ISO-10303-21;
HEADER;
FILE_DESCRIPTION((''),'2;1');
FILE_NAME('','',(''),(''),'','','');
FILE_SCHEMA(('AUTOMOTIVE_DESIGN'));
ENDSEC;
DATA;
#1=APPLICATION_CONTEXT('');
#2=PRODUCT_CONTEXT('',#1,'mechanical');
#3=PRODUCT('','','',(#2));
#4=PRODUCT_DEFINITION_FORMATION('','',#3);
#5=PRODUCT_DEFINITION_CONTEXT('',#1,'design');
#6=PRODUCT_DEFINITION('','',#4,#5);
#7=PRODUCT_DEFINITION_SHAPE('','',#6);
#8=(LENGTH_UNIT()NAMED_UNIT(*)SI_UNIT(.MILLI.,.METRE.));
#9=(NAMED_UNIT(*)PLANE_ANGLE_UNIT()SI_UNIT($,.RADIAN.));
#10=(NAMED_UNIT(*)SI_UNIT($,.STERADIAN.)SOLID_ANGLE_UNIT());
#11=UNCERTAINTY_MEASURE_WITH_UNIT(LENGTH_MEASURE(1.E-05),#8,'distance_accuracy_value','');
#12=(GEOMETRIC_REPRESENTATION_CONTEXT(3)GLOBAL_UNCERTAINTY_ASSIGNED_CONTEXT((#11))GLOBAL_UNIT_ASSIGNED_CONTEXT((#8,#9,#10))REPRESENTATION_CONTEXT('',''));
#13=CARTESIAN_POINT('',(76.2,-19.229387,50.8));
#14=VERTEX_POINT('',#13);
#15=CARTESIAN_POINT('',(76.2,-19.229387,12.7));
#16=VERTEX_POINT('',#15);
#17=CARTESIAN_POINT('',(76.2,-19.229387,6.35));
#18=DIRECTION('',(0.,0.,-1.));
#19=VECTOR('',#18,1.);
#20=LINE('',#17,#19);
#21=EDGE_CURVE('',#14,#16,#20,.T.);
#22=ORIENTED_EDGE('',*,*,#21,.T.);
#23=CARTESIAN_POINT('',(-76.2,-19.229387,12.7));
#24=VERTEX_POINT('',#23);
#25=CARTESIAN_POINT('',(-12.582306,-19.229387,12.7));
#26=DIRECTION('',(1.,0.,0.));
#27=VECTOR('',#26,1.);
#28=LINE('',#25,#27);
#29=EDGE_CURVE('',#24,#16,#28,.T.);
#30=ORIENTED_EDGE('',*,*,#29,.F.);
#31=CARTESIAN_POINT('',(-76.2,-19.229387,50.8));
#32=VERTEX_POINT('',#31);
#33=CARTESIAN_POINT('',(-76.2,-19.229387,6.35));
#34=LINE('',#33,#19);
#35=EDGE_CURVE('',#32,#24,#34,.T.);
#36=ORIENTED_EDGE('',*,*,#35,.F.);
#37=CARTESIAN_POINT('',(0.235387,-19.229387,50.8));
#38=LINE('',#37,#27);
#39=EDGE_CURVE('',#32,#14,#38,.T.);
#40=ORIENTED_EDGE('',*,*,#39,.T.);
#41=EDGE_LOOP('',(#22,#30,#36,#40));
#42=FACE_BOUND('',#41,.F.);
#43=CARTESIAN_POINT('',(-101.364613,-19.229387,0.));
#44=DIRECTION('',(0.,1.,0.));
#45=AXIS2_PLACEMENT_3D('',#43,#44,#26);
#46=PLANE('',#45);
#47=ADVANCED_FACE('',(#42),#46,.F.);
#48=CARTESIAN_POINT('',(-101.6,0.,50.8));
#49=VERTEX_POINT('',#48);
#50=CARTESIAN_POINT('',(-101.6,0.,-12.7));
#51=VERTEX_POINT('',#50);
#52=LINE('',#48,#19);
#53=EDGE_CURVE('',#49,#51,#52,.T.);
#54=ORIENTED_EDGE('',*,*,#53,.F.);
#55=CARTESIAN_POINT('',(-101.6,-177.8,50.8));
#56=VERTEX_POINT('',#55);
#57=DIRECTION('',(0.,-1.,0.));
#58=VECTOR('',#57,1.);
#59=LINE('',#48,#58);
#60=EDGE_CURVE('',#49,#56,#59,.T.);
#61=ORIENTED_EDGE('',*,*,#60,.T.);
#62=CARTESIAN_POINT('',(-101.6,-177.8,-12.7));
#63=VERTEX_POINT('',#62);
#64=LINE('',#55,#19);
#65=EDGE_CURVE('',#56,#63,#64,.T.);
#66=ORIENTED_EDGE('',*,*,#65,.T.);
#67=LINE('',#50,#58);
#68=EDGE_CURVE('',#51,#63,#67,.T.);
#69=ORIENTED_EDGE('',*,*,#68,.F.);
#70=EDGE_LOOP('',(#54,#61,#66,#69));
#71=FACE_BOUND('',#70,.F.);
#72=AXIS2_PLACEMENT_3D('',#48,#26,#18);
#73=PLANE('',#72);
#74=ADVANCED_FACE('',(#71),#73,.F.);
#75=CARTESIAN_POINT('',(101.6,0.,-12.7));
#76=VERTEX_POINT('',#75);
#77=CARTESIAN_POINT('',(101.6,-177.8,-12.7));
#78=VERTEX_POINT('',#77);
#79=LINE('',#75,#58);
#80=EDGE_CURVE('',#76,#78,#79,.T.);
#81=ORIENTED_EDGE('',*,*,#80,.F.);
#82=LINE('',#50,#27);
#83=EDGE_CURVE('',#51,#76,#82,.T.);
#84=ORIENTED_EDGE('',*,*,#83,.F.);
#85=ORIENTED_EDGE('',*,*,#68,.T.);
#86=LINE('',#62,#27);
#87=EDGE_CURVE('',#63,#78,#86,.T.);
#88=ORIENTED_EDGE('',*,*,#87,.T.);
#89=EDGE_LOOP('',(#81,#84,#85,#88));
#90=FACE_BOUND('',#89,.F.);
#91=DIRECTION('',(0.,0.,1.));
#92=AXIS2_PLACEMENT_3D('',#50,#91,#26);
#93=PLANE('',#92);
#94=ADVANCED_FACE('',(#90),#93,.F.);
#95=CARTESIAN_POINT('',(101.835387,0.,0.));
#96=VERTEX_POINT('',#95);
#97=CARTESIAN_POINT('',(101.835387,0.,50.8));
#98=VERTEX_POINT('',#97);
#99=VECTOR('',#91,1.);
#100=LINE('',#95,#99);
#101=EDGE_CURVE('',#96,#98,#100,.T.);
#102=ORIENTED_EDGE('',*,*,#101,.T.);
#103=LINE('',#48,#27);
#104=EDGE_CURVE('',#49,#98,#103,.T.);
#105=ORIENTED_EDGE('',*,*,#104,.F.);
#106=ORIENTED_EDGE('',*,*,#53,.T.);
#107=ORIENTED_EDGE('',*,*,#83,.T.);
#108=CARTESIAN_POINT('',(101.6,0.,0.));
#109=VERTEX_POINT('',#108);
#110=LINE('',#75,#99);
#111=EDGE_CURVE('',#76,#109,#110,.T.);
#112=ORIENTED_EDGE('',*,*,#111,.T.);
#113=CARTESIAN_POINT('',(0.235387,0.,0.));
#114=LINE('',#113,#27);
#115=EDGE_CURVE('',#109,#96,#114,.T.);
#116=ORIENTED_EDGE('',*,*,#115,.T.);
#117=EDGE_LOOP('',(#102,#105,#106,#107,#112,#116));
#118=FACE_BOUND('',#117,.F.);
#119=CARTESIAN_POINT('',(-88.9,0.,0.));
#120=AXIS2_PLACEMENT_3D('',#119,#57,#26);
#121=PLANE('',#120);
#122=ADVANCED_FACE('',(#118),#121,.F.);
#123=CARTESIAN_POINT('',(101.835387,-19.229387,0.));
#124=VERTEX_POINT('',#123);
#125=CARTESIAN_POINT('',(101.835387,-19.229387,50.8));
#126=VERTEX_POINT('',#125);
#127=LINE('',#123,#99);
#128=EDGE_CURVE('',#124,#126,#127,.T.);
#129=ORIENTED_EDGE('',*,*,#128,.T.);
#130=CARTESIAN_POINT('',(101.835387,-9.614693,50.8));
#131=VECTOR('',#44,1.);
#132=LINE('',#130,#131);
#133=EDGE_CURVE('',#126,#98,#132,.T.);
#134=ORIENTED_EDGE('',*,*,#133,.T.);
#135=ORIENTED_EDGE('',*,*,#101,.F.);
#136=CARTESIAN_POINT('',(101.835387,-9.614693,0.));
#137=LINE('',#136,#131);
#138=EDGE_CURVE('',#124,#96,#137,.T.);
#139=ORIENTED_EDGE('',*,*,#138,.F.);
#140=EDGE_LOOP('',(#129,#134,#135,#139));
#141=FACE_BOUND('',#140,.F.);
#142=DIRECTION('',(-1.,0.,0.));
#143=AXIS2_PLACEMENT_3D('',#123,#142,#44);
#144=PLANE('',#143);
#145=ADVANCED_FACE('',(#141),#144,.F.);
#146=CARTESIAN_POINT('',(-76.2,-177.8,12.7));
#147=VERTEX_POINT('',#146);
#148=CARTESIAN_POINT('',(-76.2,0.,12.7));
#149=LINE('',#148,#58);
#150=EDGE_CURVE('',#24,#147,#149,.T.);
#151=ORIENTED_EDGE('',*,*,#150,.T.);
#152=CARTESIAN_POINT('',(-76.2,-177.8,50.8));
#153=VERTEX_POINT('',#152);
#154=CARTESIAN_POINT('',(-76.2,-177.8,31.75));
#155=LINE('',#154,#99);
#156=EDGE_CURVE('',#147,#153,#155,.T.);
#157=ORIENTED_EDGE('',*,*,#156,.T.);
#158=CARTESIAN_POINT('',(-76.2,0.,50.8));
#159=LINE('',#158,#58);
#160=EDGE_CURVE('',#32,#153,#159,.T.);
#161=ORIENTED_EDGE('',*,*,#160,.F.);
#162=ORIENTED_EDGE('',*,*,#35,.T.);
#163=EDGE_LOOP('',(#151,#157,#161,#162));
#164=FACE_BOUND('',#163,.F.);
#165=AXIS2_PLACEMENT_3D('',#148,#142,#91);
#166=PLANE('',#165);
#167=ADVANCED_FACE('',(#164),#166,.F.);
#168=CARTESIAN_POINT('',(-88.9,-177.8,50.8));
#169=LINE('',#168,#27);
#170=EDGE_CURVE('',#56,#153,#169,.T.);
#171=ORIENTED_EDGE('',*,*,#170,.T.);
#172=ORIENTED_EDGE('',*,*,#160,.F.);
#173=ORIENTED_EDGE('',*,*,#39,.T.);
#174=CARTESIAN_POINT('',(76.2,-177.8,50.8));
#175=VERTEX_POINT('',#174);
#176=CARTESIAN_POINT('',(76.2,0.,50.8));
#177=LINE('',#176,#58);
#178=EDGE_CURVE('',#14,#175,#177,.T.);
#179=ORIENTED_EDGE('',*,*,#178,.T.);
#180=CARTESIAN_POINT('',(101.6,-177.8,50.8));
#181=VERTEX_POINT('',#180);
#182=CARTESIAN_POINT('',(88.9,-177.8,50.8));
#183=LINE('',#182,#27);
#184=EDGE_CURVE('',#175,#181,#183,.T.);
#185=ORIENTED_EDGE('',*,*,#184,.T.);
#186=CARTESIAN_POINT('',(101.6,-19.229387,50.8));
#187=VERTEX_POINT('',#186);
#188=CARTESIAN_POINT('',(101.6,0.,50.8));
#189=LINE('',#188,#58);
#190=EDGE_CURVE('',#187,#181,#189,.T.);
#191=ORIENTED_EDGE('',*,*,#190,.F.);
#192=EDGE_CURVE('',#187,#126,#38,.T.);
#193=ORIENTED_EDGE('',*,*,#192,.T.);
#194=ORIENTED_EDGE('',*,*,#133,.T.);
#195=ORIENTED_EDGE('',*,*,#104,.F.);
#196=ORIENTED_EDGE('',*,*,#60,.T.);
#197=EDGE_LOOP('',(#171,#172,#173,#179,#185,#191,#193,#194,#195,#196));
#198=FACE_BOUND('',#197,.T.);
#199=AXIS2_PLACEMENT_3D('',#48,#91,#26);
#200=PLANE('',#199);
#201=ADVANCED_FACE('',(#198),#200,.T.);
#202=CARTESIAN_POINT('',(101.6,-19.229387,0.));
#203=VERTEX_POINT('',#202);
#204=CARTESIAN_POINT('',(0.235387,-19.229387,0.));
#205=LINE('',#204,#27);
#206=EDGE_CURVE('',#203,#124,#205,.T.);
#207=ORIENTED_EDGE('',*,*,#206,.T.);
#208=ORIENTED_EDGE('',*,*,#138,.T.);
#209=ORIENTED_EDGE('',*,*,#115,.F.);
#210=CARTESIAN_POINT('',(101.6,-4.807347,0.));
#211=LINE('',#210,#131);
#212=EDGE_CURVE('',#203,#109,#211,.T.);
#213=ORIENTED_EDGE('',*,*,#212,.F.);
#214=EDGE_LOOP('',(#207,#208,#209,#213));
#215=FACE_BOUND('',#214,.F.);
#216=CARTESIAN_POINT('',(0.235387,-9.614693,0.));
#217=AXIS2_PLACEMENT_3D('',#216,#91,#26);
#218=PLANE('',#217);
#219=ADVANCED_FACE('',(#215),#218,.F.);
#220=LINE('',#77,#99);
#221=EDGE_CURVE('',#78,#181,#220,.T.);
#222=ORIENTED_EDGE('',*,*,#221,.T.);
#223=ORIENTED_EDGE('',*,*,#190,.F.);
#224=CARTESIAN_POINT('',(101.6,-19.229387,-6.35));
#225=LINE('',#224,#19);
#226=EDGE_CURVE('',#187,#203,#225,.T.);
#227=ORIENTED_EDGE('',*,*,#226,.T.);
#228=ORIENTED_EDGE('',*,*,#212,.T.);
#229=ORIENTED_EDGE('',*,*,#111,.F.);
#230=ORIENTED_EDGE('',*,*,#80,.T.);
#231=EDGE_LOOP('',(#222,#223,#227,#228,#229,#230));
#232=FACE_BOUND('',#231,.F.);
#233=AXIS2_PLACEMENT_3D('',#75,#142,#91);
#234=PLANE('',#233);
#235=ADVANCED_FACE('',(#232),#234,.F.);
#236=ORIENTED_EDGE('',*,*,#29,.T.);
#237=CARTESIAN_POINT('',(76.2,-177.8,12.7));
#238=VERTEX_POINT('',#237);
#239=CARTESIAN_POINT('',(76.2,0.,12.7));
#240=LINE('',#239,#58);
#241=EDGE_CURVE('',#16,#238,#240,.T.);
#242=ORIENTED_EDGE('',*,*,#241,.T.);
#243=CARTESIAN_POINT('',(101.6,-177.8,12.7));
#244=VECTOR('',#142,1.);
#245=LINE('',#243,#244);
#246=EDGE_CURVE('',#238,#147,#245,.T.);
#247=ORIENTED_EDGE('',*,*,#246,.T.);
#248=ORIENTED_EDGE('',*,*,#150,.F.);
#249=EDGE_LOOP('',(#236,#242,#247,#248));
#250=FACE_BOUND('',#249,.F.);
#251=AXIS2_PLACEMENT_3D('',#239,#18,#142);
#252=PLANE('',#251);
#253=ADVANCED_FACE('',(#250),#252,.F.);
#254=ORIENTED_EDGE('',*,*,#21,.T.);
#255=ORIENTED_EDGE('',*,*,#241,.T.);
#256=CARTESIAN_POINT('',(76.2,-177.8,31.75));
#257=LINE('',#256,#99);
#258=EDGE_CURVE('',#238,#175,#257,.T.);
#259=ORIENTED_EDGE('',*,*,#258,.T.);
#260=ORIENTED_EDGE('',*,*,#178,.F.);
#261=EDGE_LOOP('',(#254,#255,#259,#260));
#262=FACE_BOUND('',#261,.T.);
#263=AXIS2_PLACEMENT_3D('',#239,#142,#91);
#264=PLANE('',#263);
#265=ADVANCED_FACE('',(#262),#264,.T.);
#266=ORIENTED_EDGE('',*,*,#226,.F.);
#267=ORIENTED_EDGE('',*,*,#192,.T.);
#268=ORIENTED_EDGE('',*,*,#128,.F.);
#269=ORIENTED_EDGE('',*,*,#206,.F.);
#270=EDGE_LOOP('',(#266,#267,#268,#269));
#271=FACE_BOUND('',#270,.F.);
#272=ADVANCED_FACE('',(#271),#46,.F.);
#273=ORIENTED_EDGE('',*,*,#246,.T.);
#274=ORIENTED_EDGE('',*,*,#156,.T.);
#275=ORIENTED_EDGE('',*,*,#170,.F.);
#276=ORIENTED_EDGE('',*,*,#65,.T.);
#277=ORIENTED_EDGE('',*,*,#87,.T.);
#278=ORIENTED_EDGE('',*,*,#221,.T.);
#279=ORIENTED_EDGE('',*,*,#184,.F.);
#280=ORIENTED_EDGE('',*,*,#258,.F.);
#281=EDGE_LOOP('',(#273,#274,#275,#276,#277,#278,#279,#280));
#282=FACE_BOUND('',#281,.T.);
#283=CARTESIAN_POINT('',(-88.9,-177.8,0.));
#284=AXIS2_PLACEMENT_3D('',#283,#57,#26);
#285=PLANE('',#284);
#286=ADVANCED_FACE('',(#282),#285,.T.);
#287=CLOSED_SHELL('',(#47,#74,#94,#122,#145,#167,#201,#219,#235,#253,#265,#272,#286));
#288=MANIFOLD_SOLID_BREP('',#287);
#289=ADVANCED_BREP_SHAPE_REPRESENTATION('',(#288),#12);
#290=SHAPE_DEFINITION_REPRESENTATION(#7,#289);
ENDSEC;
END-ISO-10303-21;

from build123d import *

# Parameters (mm, degrees)
F0_W     = 25.4
F0_H     = 25.4
F0_W_2   = 152.4
F0_H_2   = 38.1
F1_DEPTH = 177.8
F2_W     = 203.2
F2_H     = 19.2293866986
F3_DEPTH = 50.8


# Not quite as in the source:
# - a feature names something its author has since deleted; it is built from what else it names


with BuildPart() as f1:
    # F0 (on Front) → F1 (new body)
    with BuildSketch(Plane.XZ):
        with Locations((-88.9, 0)):
            Rectangle(F0_W, F0_H)
        Rectangle(F0_W_2, F0_H)
        with Locations((88.9, 0)):
            Rectangle(F0_W, F0_H)
        with Locations((88.9, 31.75)):
            Rectangle(F0_W, F0_H_2)
        with Locations((-88.9, 31.75)):
            Rectangle(F0_W, F0_H_2)
    extrude(amount=F1_DEPTH)

    # F2 (on Top) → F3 (join)
    with BuildSketch(Plane.XY):
        with Locations((0.2353874207, -9.6146933493)):
            Rectangle(F2_W, F2_H)
    extrude(amount=F3_DEPTH)


solid = f1.part
